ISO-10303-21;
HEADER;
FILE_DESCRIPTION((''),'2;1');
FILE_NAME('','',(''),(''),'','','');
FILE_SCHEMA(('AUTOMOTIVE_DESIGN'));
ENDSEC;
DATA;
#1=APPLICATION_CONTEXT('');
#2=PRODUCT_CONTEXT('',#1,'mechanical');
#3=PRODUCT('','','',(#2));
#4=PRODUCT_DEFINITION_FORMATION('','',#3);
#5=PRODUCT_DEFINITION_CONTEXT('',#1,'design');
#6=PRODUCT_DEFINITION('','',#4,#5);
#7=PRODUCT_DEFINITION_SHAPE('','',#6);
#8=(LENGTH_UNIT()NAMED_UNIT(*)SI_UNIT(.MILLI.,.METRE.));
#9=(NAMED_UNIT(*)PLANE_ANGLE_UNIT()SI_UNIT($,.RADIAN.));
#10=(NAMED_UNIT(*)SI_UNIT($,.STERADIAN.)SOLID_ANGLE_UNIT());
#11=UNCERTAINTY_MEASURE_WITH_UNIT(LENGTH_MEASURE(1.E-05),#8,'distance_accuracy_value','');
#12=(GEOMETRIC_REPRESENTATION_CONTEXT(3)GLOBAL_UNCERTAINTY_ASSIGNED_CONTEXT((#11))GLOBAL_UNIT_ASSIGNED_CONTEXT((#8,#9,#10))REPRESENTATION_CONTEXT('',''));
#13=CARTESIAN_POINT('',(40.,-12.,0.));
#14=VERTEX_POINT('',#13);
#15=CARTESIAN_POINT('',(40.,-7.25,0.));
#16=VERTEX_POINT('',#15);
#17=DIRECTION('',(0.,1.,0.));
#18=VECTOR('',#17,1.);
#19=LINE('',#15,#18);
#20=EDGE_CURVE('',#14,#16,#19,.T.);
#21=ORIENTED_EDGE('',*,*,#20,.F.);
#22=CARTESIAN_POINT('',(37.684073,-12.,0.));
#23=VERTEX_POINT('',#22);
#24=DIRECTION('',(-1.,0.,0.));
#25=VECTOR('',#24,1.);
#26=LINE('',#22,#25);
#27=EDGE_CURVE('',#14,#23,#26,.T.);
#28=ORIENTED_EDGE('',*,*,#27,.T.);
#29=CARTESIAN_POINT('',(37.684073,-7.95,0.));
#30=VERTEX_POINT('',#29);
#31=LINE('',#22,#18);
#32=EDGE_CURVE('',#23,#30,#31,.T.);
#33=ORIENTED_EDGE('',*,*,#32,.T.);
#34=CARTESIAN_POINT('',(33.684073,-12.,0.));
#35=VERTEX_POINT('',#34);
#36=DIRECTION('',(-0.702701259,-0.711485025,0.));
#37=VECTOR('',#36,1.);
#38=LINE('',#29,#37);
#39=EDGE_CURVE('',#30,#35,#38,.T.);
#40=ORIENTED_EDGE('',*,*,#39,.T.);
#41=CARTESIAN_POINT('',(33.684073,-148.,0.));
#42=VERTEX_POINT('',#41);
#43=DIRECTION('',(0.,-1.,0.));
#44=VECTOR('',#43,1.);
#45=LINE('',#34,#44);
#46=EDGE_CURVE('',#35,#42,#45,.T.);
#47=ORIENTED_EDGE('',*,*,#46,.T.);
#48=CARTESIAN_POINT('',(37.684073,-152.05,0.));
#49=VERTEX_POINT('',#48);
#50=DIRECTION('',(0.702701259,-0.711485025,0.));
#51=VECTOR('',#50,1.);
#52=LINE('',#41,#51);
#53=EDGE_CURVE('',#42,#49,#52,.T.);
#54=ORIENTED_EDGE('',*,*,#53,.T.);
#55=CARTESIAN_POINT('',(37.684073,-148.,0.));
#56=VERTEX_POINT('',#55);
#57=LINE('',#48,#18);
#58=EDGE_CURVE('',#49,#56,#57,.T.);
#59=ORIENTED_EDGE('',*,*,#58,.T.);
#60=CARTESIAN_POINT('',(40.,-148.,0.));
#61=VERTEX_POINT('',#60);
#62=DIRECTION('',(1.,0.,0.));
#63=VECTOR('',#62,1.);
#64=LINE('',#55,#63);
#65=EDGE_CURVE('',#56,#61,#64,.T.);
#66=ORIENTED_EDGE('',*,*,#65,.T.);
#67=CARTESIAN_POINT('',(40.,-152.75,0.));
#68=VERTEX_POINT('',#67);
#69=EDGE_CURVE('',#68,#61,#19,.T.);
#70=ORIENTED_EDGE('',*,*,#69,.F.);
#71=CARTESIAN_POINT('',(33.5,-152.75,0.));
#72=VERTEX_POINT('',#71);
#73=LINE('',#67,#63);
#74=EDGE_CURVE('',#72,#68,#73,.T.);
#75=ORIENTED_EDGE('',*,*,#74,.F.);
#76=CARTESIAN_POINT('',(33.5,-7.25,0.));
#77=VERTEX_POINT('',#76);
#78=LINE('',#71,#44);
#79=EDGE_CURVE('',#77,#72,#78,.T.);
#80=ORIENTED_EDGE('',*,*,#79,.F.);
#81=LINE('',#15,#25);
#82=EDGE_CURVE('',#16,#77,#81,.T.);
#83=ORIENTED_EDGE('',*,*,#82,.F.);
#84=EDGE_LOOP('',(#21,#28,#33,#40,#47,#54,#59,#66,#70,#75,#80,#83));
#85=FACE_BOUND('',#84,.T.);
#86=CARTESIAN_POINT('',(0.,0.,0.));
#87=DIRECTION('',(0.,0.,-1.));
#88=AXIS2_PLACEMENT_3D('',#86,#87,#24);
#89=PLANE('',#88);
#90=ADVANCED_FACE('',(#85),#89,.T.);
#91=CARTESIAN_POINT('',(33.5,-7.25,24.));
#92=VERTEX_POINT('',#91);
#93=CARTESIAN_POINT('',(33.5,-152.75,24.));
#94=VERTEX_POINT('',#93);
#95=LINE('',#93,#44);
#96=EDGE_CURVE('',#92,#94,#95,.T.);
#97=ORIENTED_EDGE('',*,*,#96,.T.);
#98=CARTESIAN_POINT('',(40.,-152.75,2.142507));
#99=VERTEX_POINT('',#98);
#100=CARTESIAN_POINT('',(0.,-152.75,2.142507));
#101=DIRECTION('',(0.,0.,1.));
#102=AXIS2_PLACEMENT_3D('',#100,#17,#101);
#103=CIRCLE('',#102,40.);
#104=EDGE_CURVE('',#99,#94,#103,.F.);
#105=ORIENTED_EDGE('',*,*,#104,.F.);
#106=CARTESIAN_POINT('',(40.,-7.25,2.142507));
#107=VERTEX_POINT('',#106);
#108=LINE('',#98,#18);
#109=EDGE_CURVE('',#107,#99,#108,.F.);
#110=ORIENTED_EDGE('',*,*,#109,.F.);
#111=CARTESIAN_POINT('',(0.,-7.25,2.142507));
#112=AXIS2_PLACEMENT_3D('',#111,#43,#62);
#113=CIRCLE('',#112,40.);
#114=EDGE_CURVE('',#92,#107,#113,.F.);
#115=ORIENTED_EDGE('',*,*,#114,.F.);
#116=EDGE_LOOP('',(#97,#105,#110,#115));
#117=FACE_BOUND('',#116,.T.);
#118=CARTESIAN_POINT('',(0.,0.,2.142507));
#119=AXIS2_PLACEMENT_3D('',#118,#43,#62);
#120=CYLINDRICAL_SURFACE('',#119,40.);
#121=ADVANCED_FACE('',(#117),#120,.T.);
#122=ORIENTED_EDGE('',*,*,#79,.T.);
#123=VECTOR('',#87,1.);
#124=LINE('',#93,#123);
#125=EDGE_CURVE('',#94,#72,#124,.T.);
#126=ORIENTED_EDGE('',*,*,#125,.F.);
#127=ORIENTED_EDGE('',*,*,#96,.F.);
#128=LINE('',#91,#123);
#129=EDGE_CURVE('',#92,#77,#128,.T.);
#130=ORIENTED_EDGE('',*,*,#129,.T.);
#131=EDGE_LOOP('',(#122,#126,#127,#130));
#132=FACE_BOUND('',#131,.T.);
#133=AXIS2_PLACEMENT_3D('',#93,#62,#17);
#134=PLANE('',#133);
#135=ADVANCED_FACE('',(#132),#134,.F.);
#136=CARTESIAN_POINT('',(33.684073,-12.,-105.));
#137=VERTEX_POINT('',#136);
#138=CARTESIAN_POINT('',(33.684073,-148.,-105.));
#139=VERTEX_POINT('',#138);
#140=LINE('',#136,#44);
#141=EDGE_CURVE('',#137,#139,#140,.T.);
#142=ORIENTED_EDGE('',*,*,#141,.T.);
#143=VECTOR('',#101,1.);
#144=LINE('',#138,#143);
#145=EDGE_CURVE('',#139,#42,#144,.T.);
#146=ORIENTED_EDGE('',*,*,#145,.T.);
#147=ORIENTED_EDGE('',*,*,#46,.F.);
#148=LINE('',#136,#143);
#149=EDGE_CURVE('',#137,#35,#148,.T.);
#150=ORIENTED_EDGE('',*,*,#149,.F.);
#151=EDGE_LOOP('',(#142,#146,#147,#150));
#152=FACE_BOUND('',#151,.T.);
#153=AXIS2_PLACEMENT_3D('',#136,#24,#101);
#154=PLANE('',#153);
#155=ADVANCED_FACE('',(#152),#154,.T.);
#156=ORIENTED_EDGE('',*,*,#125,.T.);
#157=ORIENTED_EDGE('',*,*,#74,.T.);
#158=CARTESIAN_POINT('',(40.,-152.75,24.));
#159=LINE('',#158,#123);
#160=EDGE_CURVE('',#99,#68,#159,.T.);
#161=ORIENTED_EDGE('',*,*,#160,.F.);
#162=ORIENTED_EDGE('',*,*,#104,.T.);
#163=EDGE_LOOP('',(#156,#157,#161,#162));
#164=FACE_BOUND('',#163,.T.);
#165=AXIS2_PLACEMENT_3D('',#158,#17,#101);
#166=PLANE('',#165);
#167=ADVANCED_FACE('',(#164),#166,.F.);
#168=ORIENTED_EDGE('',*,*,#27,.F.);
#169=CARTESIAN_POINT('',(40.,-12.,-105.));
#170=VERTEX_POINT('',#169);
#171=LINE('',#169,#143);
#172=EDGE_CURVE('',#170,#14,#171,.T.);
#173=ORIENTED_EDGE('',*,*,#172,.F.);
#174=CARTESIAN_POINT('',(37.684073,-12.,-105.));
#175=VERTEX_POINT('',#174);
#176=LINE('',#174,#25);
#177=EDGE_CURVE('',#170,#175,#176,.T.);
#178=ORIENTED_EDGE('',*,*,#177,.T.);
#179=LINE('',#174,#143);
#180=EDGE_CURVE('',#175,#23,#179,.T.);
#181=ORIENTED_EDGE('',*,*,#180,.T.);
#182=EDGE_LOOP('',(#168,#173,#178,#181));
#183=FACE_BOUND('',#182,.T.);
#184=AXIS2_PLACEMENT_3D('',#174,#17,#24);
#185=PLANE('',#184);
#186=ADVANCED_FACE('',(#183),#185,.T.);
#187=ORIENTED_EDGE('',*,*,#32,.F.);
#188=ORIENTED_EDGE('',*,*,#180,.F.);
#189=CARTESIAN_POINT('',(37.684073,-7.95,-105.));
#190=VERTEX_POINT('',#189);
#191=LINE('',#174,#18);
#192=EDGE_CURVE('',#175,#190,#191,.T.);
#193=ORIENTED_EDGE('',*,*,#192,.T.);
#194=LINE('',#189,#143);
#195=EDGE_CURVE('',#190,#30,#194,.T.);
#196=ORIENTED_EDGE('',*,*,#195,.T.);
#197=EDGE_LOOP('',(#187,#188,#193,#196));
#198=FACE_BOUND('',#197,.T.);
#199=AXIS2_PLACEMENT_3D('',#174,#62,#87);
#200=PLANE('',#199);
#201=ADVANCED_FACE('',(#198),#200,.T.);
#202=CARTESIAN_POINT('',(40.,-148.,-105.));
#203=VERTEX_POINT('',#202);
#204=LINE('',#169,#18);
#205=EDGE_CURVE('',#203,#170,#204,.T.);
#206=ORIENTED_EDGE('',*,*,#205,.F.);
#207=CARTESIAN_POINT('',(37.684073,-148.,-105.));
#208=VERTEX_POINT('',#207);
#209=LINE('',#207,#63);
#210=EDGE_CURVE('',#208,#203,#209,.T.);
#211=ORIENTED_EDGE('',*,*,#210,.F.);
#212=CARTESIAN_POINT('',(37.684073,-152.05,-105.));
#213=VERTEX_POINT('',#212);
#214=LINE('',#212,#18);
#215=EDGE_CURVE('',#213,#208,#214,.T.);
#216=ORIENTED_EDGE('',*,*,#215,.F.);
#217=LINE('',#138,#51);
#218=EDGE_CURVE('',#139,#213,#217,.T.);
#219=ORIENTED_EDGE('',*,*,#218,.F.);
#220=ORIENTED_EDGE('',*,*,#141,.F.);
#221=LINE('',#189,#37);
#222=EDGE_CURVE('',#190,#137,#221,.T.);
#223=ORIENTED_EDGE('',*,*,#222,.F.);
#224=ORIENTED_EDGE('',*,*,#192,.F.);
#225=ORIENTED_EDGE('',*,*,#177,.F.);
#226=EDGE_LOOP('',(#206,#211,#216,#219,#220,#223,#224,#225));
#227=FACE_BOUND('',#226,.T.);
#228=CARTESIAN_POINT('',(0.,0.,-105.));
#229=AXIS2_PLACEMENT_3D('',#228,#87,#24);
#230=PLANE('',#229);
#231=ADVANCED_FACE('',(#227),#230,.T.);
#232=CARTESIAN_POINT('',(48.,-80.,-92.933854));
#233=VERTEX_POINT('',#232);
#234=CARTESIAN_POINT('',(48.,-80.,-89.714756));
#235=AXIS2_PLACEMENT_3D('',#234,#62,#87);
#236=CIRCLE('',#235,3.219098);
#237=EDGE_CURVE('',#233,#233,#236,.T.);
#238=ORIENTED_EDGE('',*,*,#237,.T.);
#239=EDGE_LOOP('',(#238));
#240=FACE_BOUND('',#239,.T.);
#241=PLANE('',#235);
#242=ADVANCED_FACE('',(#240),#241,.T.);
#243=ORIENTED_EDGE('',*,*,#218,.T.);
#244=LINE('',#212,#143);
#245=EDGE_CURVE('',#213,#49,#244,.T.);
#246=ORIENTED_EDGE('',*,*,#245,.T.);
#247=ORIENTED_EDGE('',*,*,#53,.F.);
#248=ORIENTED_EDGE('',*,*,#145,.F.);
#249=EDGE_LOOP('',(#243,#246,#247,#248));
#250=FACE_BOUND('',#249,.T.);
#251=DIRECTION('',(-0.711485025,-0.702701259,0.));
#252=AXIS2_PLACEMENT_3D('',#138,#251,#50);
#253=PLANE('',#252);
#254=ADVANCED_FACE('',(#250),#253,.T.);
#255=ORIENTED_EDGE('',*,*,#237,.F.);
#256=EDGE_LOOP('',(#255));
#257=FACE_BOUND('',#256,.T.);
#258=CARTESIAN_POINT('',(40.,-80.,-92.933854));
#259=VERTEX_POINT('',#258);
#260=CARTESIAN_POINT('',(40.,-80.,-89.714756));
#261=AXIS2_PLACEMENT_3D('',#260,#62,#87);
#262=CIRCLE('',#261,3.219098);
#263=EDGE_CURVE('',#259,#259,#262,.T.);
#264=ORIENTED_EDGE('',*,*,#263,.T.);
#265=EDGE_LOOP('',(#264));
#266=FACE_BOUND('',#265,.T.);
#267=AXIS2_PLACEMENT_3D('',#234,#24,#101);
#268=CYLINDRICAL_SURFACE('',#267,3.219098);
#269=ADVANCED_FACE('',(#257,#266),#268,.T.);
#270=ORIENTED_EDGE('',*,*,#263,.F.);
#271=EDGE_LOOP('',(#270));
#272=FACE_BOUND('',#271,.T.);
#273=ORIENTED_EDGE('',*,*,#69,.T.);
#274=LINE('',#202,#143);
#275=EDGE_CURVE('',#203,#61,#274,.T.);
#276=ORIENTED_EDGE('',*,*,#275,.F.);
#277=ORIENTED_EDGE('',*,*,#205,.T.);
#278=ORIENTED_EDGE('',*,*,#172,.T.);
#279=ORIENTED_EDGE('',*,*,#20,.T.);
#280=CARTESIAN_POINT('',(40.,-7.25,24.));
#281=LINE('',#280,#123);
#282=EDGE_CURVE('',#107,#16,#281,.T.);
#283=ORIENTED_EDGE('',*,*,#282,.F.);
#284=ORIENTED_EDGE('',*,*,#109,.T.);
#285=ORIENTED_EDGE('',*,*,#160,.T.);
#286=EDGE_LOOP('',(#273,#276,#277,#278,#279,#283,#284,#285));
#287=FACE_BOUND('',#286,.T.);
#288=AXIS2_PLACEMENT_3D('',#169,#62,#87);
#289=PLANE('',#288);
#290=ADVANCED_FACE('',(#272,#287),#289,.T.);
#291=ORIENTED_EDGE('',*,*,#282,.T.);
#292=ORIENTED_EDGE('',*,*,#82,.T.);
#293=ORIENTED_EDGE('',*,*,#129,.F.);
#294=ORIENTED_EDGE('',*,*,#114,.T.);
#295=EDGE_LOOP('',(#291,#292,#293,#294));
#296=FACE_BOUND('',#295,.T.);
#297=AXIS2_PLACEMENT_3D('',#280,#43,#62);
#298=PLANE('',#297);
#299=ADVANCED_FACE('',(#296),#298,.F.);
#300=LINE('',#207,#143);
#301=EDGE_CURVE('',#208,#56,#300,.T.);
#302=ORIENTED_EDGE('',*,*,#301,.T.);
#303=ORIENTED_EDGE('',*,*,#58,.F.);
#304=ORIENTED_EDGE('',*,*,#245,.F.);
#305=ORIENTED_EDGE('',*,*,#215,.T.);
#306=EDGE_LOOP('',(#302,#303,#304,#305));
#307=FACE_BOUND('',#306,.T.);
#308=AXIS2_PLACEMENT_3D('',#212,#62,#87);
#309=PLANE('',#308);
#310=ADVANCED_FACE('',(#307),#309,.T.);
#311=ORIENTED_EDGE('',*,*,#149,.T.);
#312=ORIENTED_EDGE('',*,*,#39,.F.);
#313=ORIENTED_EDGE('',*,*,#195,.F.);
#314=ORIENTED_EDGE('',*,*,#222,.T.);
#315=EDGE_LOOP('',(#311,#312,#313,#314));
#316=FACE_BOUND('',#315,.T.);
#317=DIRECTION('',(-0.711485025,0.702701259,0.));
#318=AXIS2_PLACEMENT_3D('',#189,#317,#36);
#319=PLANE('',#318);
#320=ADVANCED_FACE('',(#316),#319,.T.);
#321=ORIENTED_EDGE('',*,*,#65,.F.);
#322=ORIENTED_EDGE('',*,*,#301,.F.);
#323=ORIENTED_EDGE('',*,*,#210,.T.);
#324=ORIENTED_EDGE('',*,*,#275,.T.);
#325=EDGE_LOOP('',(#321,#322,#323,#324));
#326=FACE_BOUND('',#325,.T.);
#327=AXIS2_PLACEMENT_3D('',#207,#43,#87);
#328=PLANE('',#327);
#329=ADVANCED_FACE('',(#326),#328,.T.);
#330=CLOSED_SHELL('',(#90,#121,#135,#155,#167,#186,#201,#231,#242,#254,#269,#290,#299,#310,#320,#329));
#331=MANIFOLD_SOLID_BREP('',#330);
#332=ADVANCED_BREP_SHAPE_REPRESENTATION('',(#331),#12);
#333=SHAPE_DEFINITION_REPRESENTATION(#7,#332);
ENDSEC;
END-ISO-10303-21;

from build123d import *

# Parameters (mm, degrees)
BOSS_EXTRUDE1_DEPTH = 105
BOSS_EXTRUDE2_DEPTH = 24
FILLET1_R           = 40
SKETCH5_R           = 3.219097994
BOSS_EXTRUDE3_DEPTH = 8


with BuildPart() as part:
    # Sketch1 → Boss-Extrude1 (new body)
    with BuildSketch(Plane.XY):
        Polygon((37.684072543, -12), (37.684072543, -7.95), (33.684072543, -12), (33.684072543, -148), (37.684072543, -152.05), (37.684072543, -148), (40, -148), (40, -12), align=None)
    extrude(amount=-BOSS_EXTRUDE1_DEPTH)

    # Sketch4 → Boss-Extrude2 (add)
    with BuildSketch(Plane.XY):
        Polygon((40, -152.75), (33.5, -152.75), (33.5, -7.25), (40, -7.25), (40, -80), align=None)
    extrude(amount=BOSS_EXTRUDE2_DEPTH)

    # Fillet1
    # the kernel refuses this fillet: 40 mm, written as the material it takes off along each edge
    with BuildSketch(Plane(origin=(40, 47.393732486, 24), x_dir=(0, 0, -1), z_dir=(0, -1, 0))) as fillet1_piece_1:
        with BuildLine():
            CenterArc((21.857492994, -40), FILLET1_R, 90, 33.122940208)
            Line((0, -6.5), (-0.43714986, -5.83))
            ThreePointArc((-0.43714986, -5.83), (-0.8, -3.25), (-0.8, 0))
            Line((-0.8, 0), (0, 0.8))
            Line((0, 0.8), (21.857492994, 0.8))
            Line((21.857492994, 0.8), (21.857492994, 0))
        make_face()
    extrude(amount=254.787464972, mode=Mode.SUBTRACT)

    # Sketch5 → Boss-Extrude3 (add)
    with BuildSketch(Plane(origin=(40, 0, 0), x_dir=(0, 0, -1), z_dir=(1, 0, 0))):
        with Locations((89.714756259, -80)):
            Circle(SKETCH5_R)
    extrude(amount=BOSS_EXTRUDE3_DEPTH)


solid = part.part
